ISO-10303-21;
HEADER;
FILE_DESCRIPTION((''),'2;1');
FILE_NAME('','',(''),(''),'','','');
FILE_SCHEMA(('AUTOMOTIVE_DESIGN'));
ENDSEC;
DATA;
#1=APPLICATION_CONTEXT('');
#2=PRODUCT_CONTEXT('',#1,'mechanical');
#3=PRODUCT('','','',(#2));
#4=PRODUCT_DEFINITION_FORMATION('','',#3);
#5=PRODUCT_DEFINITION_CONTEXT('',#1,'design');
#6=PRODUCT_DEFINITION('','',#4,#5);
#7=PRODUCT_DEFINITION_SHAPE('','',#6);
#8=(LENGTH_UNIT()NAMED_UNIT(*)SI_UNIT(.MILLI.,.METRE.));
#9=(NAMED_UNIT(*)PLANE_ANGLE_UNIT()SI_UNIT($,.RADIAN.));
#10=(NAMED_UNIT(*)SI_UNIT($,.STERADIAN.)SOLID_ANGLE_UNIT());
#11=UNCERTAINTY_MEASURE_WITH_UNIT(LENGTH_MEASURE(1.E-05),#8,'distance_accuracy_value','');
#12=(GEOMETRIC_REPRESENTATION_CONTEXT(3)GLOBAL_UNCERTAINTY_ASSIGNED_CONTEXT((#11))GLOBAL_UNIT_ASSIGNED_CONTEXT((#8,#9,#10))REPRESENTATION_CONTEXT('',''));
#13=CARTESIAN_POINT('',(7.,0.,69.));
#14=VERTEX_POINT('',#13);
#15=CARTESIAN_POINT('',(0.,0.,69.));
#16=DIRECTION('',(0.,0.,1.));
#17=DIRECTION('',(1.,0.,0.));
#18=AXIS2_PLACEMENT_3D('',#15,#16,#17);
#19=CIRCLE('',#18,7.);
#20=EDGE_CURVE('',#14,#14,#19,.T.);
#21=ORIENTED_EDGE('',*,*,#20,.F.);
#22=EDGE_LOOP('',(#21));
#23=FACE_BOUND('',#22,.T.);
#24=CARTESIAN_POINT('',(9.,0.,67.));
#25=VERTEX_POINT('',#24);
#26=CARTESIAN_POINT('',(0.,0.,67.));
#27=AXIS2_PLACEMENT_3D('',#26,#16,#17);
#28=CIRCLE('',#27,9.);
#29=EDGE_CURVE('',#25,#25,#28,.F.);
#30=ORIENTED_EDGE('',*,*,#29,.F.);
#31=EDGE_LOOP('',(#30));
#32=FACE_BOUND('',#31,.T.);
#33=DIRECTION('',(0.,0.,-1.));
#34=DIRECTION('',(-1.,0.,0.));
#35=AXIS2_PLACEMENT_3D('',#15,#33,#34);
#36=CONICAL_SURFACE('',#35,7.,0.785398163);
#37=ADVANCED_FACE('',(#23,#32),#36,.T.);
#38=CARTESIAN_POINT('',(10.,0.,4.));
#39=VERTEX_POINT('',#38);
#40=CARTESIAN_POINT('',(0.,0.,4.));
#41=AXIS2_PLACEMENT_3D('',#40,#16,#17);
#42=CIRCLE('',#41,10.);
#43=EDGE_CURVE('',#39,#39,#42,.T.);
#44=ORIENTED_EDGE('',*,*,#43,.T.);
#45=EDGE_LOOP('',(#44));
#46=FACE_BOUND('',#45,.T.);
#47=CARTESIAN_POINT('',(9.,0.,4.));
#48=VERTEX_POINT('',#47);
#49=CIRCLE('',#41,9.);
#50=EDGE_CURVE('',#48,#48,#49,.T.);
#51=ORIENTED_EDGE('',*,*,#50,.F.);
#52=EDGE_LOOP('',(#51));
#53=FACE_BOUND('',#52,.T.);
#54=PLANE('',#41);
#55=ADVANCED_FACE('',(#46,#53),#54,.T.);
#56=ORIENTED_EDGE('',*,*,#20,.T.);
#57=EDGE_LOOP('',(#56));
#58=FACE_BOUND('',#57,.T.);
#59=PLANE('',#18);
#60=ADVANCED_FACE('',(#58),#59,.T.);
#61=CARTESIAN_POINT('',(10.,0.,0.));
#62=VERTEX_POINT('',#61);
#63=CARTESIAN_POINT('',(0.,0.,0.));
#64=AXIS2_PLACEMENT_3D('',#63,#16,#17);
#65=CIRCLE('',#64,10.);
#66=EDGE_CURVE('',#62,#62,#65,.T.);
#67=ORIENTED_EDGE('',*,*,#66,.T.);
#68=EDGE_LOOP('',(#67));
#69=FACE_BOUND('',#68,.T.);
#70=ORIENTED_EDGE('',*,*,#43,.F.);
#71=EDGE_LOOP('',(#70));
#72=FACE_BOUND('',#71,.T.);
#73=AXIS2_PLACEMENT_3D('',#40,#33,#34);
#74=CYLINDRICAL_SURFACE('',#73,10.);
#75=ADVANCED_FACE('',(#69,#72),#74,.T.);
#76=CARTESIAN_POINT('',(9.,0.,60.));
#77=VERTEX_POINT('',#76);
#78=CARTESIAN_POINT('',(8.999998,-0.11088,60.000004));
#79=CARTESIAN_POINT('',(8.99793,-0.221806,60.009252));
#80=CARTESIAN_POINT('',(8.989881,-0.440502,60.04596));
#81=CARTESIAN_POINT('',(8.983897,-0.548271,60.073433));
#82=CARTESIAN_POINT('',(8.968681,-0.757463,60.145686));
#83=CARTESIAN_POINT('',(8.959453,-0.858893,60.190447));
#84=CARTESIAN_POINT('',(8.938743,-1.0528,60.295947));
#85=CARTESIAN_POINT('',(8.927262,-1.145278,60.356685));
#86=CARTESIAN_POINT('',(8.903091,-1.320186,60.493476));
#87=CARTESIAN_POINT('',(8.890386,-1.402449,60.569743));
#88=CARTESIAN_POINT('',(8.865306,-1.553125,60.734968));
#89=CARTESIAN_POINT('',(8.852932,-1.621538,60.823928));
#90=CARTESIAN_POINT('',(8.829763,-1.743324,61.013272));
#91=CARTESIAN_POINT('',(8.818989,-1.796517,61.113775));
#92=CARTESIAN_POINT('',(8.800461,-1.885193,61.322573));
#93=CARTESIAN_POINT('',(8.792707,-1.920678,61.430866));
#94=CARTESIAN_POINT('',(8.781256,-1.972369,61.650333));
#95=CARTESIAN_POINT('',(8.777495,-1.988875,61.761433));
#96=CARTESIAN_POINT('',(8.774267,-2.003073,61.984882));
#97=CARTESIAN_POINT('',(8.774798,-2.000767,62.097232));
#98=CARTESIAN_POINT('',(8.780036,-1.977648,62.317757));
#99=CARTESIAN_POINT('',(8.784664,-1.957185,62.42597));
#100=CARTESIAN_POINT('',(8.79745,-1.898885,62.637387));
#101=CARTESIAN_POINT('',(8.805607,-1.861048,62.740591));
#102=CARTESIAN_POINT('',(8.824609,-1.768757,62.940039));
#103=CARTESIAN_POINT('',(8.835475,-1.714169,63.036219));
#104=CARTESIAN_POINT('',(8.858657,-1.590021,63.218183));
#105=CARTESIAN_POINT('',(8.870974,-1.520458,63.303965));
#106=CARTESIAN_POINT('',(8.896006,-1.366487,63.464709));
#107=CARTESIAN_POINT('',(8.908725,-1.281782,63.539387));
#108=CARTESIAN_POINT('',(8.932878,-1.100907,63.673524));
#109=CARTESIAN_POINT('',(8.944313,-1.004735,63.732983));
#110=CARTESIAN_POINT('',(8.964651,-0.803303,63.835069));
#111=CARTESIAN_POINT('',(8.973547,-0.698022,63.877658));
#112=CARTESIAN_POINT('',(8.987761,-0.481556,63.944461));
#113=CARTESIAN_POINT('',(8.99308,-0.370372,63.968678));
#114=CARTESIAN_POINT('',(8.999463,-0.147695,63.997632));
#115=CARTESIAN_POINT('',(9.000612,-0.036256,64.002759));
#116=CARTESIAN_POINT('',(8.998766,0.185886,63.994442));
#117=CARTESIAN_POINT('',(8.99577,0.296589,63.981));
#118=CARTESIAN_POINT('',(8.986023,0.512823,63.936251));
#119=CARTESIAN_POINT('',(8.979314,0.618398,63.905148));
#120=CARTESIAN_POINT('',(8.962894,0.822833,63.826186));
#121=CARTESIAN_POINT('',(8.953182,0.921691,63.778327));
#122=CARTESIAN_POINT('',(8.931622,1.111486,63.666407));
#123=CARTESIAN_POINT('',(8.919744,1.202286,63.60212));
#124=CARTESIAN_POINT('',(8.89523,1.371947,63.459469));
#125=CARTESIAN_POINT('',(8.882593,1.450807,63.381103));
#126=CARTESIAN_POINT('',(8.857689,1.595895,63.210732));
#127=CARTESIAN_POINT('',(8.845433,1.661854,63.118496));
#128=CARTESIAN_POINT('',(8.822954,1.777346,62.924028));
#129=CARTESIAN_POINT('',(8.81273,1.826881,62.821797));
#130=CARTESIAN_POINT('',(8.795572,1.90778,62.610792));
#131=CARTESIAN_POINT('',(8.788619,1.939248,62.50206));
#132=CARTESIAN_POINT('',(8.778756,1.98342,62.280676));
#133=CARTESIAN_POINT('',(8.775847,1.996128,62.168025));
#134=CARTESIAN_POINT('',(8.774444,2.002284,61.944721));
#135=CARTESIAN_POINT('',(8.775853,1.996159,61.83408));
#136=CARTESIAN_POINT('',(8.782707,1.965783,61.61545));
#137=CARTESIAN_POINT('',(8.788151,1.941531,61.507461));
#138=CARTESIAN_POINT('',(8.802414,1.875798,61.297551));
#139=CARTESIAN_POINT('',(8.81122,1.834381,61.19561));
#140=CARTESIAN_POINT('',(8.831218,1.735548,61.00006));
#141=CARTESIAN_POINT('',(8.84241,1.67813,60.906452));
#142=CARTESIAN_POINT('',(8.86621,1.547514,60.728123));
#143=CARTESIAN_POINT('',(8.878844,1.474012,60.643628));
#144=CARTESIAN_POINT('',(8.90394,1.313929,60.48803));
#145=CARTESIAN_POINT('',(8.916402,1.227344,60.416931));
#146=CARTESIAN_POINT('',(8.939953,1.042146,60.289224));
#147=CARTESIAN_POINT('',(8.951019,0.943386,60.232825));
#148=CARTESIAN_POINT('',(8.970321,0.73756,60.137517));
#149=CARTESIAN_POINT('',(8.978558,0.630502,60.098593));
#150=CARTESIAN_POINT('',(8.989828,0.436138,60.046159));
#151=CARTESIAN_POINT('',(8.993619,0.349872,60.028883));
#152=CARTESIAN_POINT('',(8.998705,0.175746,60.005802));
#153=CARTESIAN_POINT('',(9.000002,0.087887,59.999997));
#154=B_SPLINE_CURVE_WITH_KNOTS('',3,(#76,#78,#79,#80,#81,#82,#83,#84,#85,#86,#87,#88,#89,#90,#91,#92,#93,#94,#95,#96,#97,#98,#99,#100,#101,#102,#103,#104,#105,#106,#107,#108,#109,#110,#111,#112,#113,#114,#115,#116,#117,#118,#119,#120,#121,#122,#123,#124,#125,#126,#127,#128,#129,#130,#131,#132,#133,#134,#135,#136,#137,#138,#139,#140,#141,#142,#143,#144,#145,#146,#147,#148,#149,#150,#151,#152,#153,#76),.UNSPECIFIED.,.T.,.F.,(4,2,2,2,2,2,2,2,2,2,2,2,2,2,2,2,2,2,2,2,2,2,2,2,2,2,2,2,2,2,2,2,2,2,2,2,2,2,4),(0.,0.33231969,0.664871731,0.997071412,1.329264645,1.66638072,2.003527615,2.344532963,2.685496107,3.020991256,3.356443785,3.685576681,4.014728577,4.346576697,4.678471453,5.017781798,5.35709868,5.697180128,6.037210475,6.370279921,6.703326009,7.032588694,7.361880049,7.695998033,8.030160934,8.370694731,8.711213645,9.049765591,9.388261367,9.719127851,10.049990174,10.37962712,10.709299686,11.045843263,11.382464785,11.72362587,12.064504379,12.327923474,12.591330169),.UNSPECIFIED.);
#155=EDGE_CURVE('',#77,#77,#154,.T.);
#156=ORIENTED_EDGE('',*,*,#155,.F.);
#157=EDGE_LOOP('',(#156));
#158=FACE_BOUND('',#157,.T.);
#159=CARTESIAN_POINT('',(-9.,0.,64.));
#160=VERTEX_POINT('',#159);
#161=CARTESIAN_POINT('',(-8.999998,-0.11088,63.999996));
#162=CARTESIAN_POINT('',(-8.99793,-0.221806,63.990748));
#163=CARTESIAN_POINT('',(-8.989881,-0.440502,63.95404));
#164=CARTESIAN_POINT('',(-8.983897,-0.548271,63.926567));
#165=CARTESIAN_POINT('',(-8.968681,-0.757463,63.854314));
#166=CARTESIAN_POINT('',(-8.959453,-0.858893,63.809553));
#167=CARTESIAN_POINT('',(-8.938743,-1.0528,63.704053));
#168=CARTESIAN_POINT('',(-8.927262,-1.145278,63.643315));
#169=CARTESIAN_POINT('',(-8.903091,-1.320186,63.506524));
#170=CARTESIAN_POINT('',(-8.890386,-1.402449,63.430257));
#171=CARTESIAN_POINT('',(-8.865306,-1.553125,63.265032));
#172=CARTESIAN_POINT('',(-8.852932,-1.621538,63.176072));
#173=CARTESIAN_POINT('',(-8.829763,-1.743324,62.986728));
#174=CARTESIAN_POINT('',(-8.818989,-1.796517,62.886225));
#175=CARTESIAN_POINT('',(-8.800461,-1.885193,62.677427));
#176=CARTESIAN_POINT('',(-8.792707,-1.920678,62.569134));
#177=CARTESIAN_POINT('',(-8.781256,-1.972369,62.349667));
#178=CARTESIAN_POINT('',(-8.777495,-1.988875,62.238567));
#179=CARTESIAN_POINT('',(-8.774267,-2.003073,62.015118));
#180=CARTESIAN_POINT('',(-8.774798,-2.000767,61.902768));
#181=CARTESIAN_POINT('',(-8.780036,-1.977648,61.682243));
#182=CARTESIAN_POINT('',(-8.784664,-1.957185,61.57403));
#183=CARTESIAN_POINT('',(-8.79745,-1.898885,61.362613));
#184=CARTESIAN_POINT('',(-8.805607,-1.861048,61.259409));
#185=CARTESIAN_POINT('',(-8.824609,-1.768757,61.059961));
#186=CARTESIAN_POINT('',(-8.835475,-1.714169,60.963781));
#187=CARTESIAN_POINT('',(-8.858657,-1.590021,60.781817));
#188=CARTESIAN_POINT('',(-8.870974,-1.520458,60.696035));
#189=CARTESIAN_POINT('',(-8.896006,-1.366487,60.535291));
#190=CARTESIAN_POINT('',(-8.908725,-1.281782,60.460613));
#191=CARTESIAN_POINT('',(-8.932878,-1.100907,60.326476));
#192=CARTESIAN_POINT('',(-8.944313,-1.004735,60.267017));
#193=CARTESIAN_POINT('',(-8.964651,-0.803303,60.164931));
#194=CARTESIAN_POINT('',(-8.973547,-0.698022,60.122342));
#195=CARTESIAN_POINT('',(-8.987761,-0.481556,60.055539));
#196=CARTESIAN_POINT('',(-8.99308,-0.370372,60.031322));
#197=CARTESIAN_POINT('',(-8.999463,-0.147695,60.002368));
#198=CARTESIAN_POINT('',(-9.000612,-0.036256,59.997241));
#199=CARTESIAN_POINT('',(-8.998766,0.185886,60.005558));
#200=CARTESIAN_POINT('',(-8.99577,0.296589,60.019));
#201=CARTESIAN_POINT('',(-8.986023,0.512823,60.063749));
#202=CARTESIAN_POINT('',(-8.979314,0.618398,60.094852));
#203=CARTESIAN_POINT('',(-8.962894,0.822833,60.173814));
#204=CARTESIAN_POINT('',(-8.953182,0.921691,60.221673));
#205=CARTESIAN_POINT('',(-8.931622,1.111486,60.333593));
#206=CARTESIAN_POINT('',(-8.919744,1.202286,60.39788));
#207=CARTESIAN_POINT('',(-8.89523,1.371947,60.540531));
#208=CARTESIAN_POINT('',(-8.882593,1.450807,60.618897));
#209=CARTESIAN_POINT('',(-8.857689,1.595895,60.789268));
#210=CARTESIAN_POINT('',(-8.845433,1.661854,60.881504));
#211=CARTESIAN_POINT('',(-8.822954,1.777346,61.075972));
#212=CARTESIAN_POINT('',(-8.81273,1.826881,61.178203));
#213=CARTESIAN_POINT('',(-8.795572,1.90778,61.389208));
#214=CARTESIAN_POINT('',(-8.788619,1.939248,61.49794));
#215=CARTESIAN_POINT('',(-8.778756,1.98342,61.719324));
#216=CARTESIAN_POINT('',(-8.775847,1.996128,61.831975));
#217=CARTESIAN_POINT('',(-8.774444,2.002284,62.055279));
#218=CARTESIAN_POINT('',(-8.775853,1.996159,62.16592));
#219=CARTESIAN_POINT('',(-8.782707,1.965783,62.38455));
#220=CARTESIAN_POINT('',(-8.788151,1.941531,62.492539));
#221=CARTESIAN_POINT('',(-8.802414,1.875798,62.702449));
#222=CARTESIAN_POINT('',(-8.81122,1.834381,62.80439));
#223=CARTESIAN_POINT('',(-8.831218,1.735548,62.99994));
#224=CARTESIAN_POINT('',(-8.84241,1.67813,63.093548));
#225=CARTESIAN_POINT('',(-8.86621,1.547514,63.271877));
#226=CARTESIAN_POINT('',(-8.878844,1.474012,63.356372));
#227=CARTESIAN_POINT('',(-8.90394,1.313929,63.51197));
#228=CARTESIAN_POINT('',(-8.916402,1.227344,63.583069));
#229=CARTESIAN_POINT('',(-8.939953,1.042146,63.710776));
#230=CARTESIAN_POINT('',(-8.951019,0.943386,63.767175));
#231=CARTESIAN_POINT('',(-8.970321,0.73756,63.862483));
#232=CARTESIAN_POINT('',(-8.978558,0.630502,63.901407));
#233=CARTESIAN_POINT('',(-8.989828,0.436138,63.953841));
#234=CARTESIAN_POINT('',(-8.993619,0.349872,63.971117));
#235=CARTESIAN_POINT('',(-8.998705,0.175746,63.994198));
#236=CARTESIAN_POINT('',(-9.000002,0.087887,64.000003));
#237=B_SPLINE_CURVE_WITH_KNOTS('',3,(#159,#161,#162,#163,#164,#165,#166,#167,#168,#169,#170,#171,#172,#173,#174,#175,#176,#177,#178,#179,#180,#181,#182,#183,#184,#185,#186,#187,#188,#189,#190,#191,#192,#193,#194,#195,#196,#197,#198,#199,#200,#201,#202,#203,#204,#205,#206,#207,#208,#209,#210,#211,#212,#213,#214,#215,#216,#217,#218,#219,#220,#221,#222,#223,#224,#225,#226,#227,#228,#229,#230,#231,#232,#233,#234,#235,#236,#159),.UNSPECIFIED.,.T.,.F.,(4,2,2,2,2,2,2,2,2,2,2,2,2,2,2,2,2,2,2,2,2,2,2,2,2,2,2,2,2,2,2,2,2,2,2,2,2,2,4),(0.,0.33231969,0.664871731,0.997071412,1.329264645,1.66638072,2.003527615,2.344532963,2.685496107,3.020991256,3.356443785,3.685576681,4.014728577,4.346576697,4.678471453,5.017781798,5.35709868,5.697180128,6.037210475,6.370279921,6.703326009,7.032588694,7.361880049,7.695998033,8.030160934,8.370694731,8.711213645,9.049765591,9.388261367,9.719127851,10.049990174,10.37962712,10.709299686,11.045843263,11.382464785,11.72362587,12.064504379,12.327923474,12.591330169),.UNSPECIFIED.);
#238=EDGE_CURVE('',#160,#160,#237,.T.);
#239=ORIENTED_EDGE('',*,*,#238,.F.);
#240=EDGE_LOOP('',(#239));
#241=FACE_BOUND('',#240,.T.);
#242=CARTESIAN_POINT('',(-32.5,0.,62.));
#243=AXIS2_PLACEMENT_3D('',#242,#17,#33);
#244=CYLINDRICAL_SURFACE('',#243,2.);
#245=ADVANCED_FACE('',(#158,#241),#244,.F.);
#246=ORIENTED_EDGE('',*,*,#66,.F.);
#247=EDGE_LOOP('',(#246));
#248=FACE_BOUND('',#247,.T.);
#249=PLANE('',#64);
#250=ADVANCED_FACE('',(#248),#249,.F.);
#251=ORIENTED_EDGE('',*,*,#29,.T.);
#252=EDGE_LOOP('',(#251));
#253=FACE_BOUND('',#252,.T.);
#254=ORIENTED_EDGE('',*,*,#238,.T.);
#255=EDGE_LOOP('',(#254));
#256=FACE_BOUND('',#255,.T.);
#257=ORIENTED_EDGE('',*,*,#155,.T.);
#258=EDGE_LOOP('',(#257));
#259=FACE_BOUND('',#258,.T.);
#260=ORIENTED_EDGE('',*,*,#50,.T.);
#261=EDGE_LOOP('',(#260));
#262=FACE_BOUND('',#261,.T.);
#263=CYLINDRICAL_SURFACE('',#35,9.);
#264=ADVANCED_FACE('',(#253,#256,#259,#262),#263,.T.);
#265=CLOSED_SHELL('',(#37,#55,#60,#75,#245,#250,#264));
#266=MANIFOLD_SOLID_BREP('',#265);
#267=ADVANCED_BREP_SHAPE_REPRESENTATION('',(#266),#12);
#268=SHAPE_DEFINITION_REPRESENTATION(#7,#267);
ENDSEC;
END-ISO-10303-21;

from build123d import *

# Parameters (mm, degrees)
SKETCH1_R           = 10
BOSS_EXTRUDE1_DEPTH = 4
SKETCH2_R           = 9
BOSS_EXTRUDE2_DEPTH = 65
CHAMFER4_SIZE       = 2
SKETCH3_R           = 2
CUT_EXTRUDE1_DEPTH  = 32.5


with BuildPart() as part:
    # Sketch1 → Boss-Extrude1 (new body)
    with BuildSketch(Plane.XY):
        Circle(SKETCH1_R)
    extrude(amount=BOSS_EXTRUDE1_DEPTH)

    # Sketch2 → Boss-Extrude2 (add)
    with BuildSketch(Plane.XY.offset(4)):
        Circle(SKETCH2_R)
    extrude(amount=BOSS_EXTRUDE2_DEPTH)

    # Chamfer4
    chamfer4_edges = [part.edges().sort_by_distance(p)[0] for p in [
        (-9, 0, 69),
    ]]
    chamfer(chamfer4_edges, length=CHAMFER4_SIZE)

    # Sketch3 → Cut-Extrude1 (cut, symmetric)
    with BuildSketch(Plane(origin=(0, 0, 0), x_dir=(0, 0, -1), z_dir=(1, 0, 0))):
        with Locations((-62, 0)):
            Circle(SKETCH3_R)
    extrude(amount=CUT_EXTRUDE1_DEPTH, both=True, mode=Mode.SUBTRACT)


solid = part.part
